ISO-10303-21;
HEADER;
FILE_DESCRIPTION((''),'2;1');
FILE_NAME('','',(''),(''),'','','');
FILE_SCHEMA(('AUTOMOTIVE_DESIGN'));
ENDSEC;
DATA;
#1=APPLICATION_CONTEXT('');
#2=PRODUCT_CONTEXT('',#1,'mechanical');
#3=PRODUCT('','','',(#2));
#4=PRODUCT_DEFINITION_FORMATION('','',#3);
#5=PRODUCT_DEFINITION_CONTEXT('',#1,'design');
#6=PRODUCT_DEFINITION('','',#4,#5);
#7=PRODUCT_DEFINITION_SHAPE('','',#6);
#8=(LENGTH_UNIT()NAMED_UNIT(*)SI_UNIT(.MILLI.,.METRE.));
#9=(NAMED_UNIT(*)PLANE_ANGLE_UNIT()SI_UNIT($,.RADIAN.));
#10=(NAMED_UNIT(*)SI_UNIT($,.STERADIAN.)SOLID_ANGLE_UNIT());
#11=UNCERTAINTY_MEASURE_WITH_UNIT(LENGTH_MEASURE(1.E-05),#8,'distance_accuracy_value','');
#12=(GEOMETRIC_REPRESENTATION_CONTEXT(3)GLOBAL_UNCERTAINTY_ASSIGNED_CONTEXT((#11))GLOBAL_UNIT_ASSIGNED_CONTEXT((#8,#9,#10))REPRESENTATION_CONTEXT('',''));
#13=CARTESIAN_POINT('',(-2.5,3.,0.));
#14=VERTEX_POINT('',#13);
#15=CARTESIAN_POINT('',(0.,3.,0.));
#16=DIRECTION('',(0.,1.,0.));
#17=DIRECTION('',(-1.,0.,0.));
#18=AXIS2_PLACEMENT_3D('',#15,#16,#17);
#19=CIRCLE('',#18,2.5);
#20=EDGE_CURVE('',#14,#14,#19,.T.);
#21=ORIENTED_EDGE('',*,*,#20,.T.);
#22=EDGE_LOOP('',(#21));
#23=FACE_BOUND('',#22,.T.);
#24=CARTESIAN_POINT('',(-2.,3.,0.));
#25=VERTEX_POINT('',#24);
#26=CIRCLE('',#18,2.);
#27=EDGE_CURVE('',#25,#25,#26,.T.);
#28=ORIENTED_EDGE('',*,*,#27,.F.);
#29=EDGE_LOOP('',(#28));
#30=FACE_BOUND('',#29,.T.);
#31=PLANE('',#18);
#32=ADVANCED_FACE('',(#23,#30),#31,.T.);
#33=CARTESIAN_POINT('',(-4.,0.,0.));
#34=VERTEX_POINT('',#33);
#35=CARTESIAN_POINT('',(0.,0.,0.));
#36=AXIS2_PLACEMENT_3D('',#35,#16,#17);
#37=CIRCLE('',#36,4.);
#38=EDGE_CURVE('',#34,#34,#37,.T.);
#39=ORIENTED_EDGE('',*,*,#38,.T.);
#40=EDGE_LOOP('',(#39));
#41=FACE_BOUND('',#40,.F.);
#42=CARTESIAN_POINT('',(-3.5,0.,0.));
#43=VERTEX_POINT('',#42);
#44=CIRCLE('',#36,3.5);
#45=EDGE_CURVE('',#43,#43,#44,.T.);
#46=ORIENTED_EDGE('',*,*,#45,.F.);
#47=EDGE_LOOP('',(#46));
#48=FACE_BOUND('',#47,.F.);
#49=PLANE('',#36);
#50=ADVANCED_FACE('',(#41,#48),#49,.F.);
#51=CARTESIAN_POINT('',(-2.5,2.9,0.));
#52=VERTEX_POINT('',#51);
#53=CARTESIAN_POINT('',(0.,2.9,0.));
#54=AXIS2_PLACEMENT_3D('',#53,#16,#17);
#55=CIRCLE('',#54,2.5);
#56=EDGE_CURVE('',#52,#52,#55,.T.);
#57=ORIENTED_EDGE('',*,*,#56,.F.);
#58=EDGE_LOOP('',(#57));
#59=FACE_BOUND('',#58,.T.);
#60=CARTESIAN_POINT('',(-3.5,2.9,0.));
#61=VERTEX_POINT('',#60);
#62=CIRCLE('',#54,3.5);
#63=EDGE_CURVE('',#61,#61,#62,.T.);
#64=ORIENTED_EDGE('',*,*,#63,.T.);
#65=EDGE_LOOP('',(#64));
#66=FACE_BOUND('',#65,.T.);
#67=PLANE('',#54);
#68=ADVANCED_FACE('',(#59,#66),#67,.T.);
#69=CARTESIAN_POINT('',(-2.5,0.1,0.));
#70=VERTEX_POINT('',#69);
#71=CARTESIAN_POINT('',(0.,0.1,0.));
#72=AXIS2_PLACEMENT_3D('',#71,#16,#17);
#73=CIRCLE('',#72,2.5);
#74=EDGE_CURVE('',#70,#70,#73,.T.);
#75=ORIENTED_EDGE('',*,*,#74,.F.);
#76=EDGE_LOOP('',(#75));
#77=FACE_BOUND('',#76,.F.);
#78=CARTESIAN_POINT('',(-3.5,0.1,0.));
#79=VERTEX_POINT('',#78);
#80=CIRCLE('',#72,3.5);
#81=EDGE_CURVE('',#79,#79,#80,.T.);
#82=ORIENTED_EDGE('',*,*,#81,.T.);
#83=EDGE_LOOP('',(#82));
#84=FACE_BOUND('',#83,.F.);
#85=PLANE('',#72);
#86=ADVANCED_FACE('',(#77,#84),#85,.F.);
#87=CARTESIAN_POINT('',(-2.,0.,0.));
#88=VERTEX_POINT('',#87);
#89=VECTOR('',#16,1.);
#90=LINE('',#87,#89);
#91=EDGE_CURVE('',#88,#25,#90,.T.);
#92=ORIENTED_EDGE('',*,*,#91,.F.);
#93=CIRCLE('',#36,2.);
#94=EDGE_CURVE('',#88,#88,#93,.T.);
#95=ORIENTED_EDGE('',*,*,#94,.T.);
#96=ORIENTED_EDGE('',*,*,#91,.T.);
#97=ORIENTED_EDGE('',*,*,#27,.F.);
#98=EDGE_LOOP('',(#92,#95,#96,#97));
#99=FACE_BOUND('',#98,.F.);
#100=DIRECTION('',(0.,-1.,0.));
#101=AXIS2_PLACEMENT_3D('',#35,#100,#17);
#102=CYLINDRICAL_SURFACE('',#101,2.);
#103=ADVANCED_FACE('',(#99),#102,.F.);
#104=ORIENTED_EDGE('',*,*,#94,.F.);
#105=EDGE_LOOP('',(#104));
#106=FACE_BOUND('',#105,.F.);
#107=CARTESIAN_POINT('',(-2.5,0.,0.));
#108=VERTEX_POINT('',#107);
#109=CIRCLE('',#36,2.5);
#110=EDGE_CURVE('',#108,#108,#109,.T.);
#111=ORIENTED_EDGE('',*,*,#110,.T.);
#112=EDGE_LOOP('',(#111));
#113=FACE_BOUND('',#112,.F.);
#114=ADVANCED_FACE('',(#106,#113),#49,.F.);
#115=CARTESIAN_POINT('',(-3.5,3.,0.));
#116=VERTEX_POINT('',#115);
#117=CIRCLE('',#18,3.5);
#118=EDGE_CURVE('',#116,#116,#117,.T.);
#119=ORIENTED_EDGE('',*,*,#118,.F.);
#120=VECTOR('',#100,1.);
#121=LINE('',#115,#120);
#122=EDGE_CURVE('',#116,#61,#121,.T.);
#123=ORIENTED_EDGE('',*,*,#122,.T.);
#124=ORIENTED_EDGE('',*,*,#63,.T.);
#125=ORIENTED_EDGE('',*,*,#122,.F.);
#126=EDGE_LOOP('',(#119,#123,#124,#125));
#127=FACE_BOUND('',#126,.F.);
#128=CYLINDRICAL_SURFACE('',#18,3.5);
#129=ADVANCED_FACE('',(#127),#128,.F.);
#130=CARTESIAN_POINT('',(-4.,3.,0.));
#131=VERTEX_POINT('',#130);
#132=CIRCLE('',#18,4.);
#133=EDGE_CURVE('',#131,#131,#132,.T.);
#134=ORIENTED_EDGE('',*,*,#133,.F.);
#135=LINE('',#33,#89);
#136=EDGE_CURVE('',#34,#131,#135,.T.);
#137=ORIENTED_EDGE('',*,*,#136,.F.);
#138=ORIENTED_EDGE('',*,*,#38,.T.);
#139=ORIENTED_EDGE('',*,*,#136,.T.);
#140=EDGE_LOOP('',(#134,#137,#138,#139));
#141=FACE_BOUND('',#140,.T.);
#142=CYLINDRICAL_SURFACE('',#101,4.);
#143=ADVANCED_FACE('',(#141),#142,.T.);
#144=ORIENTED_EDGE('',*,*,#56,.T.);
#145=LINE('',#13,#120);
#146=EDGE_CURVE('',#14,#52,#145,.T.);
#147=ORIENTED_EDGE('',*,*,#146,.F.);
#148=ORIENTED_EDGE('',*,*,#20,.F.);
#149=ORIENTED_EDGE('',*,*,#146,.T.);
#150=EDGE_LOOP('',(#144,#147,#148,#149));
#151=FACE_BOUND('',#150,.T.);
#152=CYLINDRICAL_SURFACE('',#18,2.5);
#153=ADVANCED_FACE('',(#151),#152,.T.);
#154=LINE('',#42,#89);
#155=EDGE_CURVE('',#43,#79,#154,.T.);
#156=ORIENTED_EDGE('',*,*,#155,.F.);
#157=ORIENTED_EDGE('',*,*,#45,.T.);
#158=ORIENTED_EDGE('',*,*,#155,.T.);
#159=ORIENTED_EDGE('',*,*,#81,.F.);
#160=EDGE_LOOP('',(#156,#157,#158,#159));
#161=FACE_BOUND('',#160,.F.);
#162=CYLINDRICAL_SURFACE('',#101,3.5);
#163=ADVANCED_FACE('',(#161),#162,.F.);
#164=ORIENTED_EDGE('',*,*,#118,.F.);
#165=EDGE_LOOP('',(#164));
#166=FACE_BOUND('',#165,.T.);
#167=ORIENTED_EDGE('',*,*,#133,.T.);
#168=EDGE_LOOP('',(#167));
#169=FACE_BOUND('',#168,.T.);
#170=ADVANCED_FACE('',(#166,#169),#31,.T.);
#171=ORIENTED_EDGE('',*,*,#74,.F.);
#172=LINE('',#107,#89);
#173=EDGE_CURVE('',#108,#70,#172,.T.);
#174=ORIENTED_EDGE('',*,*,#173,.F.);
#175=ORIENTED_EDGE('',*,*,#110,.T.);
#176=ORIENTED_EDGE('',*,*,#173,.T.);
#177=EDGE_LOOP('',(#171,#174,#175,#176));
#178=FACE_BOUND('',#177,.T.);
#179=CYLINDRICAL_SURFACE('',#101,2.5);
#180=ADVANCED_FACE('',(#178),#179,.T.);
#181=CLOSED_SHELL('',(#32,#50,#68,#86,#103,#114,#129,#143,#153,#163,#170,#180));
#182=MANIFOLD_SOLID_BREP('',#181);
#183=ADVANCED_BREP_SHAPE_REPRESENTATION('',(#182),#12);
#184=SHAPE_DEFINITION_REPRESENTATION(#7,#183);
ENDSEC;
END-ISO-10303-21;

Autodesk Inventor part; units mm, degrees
ref_plane "YZ Plane" through (0, 0, 0) normal (1, 0, 0) x (0, 1, 0)
ref_plane "XZ Plane" through (0, 0, 0) normal (0, 1, 0) x (-1, 0, 0)
ref_plane "XY Plane" through (0, 0, 0) normal (0, 0, 1) x (1, 0, 0)
sketch "Sketch1" plane through (0, 0, 0) normal (0, 1, 0) x (-1, 0, 0)
  circle A0 centre (0, 0) radius 4
  circle A1 centre (0, 0) radius 2.5
  circle A2 centre (0, 0) radius 2
  circle A3 centre (0, 0) radius 3.5
  dimension "d0" = 8
  dimension "d1" = 5
  dimension "d2" = 4
  dimension "d3" = 7
extrude "Extrusion1" add sketch "Sketch1" along normal blind 3 contours A0 | A1 | A3
extrude "Extrusion2" cut sketch "Sketch1" against normal blind 0.1 from surface at 3 contours A3
extrude "Extrusion3" cut sketch "Sketch1" along normal blind 0.1 contours A3
properties part number "Miniatur Kugellager MR 84 2RS 4x8x3 mm"
